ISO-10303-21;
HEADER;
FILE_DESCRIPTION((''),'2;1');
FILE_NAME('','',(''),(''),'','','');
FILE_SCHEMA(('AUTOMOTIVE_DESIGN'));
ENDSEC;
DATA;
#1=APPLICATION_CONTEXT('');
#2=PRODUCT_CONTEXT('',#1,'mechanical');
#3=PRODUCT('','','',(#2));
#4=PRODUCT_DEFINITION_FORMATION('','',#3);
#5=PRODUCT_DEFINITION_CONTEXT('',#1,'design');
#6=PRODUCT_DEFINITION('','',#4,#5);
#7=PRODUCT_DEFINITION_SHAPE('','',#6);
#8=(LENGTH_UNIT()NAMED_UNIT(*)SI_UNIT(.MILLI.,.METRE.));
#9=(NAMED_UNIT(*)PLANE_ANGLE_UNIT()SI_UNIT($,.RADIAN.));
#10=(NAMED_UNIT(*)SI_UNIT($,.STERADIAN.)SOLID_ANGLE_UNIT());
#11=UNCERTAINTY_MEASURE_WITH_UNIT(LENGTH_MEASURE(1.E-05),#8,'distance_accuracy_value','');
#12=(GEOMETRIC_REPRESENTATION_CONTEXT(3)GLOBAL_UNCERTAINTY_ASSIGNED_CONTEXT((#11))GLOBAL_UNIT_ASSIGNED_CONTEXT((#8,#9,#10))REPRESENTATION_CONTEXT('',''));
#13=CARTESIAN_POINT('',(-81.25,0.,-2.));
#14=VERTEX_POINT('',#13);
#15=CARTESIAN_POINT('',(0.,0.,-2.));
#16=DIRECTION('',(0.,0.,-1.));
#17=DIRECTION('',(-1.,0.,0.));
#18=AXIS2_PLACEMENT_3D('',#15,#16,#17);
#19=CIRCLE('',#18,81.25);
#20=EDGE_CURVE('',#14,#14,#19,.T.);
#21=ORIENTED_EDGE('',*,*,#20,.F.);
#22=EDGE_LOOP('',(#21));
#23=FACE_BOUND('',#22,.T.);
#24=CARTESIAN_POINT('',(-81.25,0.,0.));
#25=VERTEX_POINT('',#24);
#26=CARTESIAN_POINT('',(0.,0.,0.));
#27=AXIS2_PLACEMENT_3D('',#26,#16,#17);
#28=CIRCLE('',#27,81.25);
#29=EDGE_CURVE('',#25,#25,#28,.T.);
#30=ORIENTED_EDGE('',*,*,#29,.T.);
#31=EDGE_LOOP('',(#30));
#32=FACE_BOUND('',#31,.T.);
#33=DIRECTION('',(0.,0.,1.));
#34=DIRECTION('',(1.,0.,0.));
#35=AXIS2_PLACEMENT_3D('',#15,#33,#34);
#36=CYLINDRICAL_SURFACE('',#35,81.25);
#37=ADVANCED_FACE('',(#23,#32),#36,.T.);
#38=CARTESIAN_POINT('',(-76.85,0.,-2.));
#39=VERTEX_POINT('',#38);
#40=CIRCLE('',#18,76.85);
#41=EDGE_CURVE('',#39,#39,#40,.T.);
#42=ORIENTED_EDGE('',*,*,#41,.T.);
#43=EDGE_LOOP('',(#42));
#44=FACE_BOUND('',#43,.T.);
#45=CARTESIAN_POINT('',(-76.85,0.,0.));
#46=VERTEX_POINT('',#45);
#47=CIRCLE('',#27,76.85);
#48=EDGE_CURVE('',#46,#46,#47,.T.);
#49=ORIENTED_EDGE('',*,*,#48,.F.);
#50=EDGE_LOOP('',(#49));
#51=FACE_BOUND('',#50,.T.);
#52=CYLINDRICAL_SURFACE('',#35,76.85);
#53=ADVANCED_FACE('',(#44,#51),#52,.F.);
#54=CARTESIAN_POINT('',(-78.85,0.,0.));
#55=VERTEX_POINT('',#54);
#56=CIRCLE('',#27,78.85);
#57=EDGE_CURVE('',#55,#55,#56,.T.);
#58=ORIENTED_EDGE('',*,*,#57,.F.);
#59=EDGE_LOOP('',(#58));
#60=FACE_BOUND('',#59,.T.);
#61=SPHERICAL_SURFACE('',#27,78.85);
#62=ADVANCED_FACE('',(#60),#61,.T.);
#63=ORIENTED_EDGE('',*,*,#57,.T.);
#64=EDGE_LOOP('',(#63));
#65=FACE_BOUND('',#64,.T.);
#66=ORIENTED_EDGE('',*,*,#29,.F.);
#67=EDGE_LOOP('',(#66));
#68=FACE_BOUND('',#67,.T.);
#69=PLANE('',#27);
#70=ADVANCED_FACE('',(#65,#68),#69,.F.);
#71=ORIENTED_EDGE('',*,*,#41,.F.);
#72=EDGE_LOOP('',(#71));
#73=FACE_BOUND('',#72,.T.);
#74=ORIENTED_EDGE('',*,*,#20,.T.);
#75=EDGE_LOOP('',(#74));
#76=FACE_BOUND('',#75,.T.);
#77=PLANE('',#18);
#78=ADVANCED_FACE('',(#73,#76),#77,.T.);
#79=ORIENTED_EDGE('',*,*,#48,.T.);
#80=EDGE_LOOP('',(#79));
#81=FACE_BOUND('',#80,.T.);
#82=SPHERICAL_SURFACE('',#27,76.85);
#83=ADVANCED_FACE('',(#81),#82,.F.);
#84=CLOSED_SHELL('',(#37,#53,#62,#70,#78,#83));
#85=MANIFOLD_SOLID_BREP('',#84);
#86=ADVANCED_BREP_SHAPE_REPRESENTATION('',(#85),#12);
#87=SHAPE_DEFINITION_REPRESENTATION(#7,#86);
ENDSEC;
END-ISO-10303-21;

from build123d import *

# Parameters (mm, degrees)
SHELL1_T            = -2
SKETCH2_R           = 81.25
SKETCH2_R_2         = 76.85
BOSS_EXTRUDE1_DEPTH = 2


# Read off the part's stored shape, not the designer's step: Revolve1
with BuildPart() as part:
    # Revolve1 outline → Revolve1 (revolve)
    with BuildSketch(Plane.XZ):
        with BuildLine():
            Line((0, 0), (78.85, -7.9e-08))
            ThreePointArc((78.85, -7.9e-08), (55.755369724, 55.755369669), (0, 78.85))
            Line((0, 78.85), (0, 0))
        make_face()
    revolve(axis=Axis((0, 0, 0), (0, 0, 1)))

    # Shell1
    shell1_openings = [part.faces().sort_by_distance(p)[0] for p in [
        (0, 0, 0),
    ]]
    offset(amount=SHELL1_T, openings=shell1_openings, kind=Kind.INTERSECTION)

    # Sketch2 → Boss-Extrude1 (add)
    with BuildSketch(Plane(origin=(0, 0, 0), x_dir=(-1, 0, 0), z_dir=(0, 0, -1))):
        Circle(SKETCH2_R)
        Circle(SKETCH2_R_2, mode=Mode.SUBTRACT)
    extrude(amount=BOSS_EXTRUDE1_DEPTH)


solid = part.part
